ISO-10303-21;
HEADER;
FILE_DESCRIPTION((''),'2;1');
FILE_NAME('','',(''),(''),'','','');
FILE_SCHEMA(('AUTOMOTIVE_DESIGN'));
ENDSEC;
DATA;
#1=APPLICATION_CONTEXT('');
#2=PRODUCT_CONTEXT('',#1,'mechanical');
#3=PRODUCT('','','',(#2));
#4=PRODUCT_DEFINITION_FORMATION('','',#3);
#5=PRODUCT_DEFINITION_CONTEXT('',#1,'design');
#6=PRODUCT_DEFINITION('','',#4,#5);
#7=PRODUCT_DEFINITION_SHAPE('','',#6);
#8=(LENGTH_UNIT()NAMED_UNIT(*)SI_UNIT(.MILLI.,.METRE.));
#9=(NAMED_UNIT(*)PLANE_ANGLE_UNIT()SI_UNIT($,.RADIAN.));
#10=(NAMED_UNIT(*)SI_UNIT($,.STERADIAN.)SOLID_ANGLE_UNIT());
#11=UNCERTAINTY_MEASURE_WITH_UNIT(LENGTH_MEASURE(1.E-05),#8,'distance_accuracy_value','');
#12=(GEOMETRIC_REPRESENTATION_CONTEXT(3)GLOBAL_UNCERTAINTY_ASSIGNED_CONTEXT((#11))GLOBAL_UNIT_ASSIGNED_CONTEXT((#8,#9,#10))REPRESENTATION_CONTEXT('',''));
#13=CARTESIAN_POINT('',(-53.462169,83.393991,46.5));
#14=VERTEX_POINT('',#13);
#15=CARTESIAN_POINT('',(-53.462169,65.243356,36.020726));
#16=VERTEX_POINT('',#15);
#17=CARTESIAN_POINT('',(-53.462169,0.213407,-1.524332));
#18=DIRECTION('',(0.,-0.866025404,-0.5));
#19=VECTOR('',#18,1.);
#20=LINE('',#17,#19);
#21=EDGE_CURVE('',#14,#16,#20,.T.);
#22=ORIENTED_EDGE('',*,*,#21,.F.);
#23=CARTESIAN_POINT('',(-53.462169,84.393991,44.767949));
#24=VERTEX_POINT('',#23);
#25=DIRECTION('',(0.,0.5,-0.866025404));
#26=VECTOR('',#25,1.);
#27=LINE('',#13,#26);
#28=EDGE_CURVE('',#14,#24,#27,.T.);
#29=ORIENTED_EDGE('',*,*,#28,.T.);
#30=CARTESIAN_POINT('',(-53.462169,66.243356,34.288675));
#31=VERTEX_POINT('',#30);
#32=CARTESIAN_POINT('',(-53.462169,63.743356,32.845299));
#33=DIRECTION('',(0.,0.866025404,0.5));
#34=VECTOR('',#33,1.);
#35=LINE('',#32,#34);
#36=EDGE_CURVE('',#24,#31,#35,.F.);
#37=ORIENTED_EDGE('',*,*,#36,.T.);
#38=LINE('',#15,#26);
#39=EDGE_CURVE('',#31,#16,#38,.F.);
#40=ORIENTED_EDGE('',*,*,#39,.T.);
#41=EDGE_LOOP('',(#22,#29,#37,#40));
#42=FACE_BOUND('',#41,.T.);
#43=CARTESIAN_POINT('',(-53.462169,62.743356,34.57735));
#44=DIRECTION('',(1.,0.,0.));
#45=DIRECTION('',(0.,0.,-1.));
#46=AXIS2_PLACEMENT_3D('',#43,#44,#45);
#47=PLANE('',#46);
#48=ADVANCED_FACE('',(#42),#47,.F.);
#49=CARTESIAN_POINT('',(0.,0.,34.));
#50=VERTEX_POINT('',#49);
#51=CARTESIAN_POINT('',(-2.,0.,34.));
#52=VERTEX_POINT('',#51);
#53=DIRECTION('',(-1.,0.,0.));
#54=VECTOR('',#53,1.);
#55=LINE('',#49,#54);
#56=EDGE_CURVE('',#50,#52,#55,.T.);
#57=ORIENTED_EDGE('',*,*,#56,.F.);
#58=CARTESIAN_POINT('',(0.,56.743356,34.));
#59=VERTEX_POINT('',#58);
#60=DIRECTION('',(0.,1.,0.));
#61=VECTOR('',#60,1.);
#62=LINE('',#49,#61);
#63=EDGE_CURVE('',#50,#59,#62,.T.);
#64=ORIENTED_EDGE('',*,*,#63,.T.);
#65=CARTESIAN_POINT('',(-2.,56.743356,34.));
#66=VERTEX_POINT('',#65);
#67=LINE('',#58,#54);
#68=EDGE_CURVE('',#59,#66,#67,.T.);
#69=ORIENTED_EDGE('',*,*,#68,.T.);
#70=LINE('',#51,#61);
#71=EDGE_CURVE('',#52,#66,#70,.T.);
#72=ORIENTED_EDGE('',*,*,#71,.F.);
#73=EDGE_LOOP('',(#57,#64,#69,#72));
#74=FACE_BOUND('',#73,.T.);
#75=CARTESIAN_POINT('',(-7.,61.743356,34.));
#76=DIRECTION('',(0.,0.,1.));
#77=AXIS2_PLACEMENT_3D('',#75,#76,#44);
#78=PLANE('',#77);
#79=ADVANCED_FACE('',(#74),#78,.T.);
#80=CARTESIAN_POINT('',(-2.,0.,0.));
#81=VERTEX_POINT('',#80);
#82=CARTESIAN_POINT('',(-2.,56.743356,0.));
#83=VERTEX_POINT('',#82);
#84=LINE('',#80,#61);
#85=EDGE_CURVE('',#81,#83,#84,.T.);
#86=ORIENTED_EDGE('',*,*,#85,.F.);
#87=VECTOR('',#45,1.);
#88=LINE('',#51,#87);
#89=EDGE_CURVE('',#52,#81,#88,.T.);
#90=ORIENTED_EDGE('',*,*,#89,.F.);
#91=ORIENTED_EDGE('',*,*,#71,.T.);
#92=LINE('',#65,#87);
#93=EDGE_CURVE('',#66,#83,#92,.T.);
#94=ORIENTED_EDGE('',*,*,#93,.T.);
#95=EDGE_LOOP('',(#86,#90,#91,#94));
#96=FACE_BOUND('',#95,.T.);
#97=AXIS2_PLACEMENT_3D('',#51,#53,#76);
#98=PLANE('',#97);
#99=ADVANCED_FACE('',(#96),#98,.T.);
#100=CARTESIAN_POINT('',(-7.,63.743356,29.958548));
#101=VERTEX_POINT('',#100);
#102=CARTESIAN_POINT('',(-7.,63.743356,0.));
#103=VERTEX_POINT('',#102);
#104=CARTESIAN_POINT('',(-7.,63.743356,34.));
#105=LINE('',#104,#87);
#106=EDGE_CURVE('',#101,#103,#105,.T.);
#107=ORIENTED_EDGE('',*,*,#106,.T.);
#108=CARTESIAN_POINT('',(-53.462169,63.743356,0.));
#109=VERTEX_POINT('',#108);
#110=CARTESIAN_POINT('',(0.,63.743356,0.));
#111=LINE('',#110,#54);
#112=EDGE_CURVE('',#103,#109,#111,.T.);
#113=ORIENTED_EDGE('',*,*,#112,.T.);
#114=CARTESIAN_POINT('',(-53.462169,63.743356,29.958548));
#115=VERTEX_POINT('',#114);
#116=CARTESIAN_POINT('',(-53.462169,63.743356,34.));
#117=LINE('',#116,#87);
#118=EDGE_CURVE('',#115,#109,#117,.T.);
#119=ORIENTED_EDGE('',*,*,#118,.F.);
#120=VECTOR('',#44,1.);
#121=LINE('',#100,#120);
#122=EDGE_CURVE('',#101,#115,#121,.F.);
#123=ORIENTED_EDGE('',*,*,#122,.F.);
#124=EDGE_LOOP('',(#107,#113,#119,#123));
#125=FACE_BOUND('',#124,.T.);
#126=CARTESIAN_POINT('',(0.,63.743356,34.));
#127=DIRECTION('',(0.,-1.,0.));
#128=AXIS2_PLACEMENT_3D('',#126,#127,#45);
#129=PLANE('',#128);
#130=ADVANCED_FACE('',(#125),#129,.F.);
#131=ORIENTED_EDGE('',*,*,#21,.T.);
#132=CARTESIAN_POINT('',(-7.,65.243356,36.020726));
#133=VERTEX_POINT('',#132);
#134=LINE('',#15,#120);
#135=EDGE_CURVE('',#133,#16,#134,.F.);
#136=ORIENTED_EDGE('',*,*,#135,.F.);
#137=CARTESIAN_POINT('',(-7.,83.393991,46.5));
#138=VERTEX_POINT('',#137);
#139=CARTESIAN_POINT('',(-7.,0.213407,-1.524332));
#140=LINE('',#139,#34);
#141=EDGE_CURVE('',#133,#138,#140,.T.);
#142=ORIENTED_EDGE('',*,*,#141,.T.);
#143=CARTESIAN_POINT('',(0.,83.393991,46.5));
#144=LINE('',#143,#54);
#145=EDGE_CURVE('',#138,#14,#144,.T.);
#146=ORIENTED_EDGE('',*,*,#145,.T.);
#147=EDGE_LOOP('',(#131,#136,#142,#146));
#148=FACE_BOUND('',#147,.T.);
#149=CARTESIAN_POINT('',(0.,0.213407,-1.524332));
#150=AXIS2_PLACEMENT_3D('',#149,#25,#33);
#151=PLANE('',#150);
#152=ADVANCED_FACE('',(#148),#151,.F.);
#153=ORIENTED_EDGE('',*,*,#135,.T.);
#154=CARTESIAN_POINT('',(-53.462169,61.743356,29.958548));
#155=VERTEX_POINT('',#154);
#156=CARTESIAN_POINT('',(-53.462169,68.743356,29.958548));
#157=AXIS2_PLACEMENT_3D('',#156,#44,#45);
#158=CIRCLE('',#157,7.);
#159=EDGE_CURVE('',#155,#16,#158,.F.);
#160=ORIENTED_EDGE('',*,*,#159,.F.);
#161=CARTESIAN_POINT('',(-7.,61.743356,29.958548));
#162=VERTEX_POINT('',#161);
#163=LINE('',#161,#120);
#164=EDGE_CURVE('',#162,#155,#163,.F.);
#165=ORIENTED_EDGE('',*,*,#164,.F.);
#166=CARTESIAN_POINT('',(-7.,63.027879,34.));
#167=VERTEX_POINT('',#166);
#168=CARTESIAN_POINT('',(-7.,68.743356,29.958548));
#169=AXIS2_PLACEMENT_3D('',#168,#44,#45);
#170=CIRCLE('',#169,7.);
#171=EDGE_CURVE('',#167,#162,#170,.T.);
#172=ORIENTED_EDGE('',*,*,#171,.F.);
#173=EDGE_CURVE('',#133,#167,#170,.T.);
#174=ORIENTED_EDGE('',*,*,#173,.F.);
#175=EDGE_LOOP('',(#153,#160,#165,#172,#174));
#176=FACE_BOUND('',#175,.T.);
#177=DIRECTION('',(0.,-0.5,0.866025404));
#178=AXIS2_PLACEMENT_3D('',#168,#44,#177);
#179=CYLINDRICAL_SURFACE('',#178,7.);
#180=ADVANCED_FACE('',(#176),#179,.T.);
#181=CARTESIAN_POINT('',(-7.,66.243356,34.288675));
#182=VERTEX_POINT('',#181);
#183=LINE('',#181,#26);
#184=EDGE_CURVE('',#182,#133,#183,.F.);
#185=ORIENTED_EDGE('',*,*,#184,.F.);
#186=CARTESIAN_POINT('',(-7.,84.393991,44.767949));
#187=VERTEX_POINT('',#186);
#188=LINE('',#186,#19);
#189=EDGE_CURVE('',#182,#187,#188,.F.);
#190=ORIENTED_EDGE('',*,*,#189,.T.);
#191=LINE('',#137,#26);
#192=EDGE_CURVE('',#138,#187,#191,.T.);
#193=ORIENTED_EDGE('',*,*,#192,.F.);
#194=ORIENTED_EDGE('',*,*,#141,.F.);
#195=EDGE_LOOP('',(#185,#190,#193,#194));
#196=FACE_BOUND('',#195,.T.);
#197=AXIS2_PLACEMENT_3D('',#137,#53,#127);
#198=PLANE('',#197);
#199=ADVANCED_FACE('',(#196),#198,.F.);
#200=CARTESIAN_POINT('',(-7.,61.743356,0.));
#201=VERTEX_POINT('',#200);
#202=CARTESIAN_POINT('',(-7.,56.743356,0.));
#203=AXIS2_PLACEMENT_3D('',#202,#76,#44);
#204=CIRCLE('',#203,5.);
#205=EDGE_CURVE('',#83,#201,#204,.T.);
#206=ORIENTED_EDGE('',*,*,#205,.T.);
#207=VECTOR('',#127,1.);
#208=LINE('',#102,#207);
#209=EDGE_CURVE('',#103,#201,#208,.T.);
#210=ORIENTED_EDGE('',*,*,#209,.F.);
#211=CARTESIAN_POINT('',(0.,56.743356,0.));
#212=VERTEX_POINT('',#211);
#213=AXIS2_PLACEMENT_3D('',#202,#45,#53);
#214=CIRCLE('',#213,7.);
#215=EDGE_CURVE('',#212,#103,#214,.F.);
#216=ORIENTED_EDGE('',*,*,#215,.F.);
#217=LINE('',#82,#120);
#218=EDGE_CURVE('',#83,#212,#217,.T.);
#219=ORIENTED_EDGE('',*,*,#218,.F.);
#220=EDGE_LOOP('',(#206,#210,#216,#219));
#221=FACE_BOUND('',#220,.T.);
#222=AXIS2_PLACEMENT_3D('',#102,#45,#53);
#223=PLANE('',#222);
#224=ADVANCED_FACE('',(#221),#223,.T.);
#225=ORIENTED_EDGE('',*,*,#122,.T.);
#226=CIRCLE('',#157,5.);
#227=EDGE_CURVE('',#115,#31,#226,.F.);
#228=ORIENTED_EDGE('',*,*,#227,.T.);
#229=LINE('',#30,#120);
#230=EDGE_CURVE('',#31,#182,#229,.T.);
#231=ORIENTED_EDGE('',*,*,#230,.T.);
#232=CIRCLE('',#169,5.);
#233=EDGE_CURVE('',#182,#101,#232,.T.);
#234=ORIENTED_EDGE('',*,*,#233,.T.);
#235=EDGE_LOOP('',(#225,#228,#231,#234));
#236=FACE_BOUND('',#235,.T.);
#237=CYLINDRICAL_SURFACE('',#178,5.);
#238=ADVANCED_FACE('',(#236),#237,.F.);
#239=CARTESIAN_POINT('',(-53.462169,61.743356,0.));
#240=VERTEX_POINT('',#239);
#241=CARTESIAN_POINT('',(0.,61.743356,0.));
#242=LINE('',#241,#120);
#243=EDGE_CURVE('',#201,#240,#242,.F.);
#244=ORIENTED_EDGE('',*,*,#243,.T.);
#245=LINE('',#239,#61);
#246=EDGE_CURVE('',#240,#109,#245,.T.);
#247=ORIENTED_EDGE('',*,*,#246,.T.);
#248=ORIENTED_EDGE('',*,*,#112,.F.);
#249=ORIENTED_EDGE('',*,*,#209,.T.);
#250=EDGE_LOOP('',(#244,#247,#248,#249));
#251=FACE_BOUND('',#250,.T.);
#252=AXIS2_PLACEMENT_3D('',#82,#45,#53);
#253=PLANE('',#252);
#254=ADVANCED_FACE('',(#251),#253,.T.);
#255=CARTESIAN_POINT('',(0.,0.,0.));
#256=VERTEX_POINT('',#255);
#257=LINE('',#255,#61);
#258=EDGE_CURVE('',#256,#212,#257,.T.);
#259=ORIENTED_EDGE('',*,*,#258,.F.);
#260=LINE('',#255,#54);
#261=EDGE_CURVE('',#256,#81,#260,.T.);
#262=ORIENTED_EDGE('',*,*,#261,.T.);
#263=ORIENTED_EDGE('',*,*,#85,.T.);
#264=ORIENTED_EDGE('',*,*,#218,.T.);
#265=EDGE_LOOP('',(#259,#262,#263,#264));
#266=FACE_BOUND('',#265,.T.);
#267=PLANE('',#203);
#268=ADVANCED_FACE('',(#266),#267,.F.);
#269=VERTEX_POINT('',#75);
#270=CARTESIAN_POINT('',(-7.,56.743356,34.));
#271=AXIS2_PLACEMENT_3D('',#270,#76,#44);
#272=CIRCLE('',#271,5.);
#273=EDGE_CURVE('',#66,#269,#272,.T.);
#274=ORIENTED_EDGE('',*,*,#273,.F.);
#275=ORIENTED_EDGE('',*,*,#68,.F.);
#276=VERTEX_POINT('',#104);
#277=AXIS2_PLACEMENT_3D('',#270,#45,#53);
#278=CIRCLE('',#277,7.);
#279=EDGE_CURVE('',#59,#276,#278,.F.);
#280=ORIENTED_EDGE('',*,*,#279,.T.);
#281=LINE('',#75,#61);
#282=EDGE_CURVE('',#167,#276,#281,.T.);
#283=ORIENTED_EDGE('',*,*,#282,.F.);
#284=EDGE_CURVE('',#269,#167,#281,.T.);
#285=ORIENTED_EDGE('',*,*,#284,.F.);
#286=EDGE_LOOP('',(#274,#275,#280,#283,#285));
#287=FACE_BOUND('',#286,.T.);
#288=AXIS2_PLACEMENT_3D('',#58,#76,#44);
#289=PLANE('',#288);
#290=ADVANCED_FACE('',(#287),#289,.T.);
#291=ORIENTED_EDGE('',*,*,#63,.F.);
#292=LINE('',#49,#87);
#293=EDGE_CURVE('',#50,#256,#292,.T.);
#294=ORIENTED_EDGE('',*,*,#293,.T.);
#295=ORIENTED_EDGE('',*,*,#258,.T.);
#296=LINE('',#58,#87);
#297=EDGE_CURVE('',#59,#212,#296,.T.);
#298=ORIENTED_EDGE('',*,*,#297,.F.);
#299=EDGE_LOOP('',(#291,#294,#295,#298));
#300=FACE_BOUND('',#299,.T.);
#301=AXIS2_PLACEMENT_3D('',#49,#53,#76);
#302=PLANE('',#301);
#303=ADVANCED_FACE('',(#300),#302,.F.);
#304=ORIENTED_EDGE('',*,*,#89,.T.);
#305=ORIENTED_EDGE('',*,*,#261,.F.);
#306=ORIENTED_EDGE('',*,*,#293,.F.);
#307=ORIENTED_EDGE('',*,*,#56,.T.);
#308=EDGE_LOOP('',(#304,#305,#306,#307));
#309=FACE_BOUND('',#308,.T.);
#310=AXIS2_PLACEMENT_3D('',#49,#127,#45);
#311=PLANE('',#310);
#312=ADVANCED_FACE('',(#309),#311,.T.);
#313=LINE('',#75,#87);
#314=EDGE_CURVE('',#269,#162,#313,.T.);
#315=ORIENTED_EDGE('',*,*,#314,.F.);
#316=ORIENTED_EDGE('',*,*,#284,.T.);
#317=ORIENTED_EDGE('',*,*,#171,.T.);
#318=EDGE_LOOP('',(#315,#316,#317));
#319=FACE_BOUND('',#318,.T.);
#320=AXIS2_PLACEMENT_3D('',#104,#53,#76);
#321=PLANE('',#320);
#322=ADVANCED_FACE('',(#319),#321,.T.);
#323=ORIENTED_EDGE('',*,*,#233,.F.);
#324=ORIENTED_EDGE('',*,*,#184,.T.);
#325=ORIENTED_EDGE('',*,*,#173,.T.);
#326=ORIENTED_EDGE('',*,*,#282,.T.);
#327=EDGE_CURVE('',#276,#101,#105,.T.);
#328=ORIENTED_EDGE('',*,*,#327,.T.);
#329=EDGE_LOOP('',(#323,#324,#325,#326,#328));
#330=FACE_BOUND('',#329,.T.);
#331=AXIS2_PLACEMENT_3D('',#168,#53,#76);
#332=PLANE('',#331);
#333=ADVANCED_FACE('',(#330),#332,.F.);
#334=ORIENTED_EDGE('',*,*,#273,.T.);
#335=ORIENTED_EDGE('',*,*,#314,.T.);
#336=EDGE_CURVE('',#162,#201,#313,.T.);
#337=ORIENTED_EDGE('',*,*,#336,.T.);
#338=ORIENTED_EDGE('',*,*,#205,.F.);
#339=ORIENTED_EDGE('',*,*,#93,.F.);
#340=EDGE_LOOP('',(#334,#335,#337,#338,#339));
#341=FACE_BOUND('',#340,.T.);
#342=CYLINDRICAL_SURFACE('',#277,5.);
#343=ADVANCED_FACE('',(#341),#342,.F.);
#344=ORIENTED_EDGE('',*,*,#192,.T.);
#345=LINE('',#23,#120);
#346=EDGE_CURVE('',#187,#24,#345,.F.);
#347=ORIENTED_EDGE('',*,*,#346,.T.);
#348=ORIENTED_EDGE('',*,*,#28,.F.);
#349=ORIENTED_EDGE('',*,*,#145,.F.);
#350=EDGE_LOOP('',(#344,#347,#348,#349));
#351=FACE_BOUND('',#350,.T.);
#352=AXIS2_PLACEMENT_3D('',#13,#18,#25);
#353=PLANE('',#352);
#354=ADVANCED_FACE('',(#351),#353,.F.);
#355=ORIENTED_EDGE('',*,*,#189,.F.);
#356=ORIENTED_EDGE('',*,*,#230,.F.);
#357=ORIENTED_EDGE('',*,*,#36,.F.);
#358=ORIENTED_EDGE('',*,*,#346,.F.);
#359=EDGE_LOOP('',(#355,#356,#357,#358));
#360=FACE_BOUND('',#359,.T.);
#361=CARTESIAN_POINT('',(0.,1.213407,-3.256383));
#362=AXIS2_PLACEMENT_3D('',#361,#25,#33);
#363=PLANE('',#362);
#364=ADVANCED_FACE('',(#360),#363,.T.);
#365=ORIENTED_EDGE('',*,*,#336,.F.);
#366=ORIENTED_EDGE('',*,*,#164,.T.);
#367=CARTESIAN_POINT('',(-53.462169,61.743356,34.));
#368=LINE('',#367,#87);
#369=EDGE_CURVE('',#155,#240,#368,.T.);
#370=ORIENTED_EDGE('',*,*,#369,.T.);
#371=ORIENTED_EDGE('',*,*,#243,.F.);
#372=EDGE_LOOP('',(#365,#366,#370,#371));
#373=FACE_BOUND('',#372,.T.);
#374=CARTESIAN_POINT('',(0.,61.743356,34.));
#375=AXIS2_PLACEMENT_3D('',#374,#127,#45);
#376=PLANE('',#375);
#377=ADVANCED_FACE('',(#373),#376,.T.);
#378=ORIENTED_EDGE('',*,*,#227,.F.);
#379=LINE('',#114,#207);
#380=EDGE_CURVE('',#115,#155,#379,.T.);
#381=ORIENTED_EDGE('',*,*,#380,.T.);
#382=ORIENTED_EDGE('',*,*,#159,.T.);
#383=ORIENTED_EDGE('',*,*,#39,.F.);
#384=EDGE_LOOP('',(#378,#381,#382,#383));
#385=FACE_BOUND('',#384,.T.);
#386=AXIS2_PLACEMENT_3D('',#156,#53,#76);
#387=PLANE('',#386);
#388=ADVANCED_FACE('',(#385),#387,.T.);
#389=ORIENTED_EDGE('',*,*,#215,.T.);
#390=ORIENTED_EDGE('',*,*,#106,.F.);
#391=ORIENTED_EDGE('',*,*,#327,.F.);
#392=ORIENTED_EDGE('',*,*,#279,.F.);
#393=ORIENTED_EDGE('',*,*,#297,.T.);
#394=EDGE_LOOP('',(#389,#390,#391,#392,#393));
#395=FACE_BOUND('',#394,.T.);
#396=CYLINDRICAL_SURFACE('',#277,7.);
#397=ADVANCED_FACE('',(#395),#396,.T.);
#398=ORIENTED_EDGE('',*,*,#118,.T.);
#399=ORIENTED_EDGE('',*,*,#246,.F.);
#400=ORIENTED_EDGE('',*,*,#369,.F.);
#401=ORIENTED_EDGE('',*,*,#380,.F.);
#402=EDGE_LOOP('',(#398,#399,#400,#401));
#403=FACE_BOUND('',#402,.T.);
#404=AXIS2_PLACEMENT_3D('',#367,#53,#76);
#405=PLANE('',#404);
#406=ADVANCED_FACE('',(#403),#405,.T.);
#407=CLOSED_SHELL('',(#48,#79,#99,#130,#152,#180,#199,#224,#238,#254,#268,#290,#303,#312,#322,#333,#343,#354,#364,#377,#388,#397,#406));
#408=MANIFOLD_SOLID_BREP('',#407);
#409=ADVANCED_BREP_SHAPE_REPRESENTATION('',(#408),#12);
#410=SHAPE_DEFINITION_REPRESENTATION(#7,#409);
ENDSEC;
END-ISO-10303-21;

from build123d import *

# Parameters (mm, degrees)
BASE_FLANGE1_DEPTH   = 34
EDGE_FLANGE1_START   = -53.462169132
EDGE_FLANGE1_DEPTH   = 46.462169132
EDGE_FLANGE1_2_DEPTH = 46.462169132


# Read off the part's stored shape, not the designer's step: Edge-Flange1
# Sheet-metal steps are written as plain solids
with BuildPart() as part:
    # Sketch1 → Base-Flange1 (new body)
    with BuildSketch(Plane.XY):
        with BuildLine():
            Line((0, 0), (0, 56.743355504))
            ThreePointArc((0, 56.743355504), (-2.050252532, 61.693102972), (-7, 63.743355504))
            Line((-7, 63.743355504), (-53.462169132, 63.743355504))
            Line((-53.462169132, 63.743355504), (-53.462169132, 61.743355504))
            Line((-53.462169132, 61.743355504), (-7, 61.743355504))
            ThreePointArc((-7, 61.743355504), (-3.464466094, 60.278889409), (-2, 56.743355504))
            Line((-2, 56.743355504), (-2, 0))
            Line((-2, 0), (0, 0))
        make_face()
    extrude(amount=BASE_FLANGE1_DEPTH)

    # Edge-Flange1 outline → Edge-Flange1 (cut)
    with BuildSketch(Plane.YZ.offset(EDGE_FLANGE1_START)):
        with BuildLine():
            ThreePointArc((61.743355504, 29.958548116), (62.072211206, 32.078886242), (63.027879437, 34))
            Line((63.027879437, 34), (61.743355504, 34))
            Line((61.743355504, 34), (61.743355504, 29.958548116))
        make_face()
    extrude(amount=EDGE_FLANGE1_DEPTH, mode=Mode.SUBTRACT)

    # Edge-Flange1 2 outline → Edge-Flange1 2 (add)
    with BuildSketch(Plane.YZ.offset(EDGE_FLANGE1_START)):
        with BuildLine():
            Line((83.393990598, 46.5), (65.243355504, 36.020725942))
            ThreePointArc((65.243355504, 36.020725942), (64.026144133, 35.130386946), (63.027879437, 34))
            Line((63.027879437, 34), (63.743355504, 34))
            Line((63.743355504, 34), (63.743355504, 29.958548116))
            ThreePointArc((63.743355504, 29.958548116), (64.413228485, 32.458548116), (66.243355504, 34.288675135))
            Line((66.243355504, 34.288675135), (84.393990598, 44.767949192))
            Line((84.393990598, 44.767949192), (83.393990598, 46.5))
        make_face()
    extrude(amount=EDGE_FLANGE1_2_DEPTH)


solid = part.part
